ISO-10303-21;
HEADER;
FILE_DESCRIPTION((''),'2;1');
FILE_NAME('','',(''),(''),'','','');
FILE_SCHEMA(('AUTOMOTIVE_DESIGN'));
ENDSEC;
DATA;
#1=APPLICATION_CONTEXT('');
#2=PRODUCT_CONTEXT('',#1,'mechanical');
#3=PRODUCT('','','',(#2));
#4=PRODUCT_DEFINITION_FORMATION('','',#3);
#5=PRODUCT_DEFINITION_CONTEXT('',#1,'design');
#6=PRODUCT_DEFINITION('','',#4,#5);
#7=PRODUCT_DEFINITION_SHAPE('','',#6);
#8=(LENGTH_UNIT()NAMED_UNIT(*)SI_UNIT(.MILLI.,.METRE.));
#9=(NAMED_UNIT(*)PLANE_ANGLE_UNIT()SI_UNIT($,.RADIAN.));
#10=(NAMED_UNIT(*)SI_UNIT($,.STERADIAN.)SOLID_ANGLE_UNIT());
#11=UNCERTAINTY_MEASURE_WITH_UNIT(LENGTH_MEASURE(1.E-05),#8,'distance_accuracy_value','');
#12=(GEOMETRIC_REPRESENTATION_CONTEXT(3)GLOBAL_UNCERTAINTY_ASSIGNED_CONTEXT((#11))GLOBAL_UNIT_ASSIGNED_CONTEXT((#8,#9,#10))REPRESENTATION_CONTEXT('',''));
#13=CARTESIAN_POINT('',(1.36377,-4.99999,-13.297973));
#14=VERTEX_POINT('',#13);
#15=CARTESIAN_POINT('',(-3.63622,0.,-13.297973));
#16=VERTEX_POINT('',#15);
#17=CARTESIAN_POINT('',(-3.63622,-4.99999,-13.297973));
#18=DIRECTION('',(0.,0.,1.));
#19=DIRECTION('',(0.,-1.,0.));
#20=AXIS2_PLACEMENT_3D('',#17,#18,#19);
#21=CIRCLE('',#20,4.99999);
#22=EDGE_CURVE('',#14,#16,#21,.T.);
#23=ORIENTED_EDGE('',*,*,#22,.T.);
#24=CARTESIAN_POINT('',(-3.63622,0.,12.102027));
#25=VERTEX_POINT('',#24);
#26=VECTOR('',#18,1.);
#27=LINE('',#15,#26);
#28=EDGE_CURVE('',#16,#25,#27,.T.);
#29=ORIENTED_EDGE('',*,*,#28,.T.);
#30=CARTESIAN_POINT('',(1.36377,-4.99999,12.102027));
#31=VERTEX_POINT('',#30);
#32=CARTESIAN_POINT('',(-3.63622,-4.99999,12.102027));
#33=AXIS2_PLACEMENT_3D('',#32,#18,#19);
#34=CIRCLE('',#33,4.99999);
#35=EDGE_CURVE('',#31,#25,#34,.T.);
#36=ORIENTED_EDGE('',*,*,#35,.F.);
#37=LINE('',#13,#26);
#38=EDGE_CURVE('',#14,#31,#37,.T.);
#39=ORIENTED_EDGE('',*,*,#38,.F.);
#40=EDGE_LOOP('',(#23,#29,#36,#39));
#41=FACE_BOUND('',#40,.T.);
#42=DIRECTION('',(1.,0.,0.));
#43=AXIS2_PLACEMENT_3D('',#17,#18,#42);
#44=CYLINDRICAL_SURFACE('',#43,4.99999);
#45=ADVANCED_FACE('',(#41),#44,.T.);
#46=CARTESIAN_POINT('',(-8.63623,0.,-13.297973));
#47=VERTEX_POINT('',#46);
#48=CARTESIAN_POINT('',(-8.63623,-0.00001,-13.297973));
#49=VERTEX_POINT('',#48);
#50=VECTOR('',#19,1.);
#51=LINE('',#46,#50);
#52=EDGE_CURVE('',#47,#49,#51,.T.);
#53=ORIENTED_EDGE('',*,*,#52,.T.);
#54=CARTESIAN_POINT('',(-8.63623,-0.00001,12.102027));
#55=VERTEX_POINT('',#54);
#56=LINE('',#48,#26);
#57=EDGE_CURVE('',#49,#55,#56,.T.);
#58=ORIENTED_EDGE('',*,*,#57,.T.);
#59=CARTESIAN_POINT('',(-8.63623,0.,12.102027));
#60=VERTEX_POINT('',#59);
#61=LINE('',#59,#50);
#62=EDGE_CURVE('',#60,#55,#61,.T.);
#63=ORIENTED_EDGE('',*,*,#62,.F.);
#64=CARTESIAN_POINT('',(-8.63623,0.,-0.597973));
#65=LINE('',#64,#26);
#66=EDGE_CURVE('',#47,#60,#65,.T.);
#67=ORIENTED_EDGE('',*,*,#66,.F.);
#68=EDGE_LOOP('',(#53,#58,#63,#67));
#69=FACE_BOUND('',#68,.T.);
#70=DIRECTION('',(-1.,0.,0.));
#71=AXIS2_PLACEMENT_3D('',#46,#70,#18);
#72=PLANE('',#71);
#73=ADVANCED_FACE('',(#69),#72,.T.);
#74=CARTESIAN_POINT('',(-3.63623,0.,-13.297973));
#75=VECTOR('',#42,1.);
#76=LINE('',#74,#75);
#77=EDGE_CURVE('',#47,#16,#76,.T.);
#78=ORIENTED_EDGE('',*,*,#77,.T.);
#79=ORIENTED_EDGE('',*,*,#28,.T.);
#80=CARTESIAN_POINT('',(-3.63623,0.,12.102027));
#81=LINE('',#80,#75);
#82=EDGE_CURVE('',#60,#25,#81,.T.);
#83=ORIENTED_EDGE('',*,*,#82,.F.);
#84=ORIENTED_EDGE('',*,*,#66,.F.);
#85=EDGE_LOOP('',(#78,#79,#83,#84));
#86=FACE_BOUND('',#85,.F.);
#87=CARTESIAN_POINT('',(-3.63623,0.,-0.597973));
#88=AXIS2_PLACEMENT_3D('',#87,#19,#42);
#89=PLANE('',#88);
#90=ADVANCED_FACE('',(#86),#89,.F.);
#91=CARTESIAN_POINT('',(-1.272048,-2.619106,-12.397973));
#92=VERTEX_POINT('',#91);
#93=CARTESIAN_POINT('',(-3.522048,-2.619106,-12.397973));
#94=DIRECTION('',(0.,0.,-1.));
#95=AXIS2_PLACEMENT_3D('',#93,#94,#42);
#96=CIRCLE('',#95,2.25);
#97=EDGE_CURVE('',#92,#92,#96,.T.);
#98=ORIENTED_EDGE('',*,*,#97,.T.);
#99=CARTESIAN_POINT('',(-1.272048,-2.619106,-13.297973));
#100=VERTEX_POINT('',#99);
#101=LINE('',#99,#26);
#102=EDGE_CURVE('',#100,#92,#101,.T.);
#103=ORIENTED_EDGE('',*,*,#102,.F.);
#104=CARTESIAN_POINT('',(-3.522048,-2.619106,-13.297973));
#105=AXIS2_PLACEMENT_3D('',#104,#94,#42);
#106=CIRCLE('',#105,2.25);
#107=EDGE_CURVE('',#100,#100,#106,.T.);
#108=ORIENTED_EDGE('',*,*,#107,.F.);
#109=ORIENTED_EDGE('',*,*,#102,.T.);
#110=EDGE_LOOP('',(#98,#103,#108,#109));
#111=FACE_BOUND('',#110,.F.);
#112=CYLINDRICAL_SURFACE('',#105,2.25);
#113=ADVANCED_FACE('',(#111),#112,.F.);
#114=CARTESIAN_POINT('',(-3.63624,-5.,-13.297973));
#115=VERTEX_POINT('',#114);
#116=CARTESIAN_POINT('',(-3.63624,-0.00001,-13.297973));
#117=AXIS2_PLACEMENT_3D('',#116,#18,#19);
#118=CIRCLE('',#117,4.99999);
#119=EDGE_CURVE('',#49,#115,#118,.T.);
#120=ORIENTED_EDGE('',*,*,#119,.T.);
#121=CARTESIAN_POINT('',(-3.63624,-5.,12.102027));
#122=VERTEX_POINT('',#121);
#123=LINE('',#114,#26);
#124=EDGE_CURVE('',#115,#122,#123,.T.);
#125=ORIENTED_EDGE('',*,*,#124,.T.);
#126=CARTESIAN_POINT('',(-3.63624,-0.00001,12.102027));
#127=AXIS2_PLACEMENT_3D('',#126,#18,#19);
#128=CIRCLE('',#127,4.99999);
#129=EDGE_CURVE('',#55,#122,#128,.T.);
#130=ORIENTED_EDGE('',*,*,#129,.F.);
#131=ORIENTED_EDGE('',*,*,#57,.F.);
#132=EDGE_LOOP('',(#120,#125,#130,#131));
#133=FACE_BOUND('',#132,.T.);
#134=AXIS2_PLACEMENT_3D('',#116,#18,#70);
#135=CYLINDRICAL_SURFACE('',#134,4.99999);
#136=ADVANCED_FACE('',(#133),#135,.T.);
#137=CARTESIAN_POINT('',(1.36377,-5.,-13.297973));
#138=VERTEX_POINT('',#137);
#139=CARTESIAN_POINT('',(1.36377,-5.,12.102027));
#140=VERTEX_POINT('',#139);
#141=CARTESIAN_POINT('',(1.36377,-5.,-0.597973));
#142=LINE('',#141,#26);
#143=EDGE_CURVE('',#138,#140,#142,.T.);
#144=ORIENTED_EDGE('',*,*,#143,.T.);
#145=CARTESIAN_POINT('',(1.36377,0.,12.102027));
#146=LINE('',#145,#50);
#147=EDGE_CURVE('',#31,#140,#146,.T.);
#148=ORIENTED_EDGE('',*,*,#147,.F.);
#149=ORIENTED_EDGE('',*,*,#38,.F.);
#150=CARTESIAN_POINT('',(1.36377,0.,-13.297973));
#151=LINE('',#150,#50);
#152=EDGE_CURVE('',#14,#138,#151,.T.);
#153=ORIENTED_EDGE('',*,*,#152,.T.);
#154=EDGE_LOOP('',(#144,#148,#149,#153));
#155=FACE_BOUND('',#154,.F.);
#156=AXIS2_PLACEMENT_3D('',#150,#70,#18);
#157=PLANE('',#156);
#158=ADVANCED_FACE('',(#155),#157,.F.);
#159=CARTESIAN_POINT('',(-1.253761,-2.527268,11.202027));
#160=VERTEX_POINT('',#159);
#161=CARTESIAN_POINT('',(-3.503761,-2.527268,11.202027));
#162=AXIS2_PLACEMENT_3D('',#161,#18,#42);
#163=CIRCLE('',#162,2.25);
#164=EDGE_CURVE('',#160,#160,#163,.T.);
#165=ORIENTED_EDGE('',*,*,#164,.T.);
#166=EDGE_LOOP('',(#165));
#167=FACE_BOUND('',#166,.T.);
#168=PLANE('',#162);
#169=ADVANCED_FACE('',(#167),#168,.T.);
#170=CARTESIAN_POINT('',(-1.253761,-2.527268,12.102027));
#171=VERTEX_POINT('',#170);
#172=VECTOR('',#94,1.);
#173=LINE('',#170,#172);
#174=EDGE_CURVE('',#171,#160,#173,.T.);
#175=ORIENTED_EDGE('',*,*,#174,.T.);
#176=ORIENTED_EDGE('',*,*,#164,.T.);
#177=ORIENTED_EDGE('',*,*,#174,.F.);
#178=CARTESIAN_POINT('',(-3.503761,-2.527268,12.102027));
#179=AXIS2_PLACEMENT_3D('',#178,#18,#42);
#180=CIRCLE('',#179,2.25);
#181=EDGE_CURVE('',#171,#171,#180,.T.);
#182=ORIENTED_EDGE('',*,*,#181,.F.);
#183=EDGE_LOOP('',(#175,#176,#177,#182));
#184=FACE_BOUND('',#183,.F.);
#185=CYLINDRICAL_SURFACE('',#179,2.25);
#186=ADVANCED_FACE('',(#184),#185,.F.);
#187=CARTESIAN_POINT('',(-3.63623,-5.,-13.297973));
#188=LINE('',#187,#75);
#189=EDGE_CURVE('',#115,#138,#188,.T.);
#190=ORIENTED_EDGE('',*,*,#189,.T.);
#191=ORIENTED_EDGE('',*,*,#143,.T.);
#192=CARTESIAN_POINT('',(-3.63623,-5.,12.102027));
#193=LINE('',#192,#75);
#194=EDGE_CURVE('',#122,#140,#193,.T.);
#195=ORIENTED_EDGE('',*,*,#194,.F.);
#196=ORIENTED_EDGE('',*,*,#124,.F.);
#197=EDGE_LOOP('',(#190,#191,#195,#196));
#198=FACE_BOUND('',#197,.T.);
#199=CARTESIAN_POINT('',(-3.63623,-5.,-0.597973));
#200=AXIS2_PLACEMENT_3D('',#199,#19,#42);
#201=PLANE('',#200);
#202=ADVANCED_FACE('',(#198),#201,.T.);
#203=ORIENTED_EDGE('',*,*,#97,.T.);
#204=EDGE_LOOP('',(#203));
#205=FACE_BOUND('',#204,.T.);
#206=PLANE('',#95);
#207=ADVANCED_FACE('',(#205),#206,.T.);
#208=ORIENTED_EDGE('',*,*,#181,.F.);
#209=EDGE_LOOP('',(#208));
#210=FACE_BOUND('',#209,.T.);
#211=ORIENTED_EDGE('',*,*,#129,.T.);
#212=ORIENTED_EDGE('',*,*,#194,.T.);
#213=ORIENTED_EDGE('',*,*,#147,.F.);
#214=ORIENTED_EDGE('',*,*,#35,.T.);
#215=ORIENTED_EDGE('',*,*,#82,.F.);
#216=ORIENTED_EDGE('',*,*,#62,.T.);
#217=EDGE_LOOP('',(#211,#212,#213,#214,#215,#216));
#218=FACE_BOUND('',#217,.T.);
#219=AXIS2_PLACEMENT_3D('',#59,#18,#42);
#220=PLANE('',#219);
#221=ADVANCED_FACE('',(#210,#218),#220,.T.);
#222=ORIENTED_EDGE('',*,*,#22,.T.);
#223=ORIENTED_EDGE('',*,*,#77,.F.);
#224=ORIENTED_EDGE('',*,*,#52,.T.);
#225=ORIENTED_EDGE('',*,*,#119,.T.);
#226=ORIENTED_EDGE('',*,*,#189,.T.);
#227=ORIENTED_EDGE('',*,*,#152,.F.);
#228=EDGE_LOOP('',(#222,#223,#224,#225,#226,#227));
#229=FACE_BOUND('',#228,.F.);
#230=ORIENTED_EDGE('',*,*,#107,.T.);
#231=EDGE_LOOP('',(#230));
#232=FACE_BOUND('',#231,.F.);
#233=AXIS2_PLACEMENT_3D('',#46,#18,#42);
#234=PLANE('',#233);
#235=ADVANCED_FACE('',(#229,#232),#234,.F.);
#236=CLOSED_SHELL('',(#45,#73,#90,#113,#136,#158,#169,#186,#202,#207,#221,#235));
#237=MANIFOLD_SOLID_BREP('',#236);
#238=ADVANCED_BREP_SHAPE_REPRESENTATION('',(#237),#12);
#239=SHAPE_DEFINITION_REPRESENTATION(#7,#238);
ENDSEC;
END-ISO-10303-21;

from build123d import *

# Parameters (mm, degrees)
F0_W     = 10
F0_H     = 25.4
F1_DEPTH = 5
F2_R     = 4.99999
F3_R     = 2.25
F4_DEPTH = 0.9
F5_R     = 2.25
F6_DEPTH = 0.9


# Not quite as in the source:
# - a fillet or chamfer is up to 0.001 mm smaller than in the source, because OpenCascade refuses the exact size


with BuildPart() as f1:
    # F0 (on Front) → F1 (new body)
    with BuildSketch(Plane.XZ):
        with Locations((-3.6362301892, -0.5979733542)):
            Rectangle(F0_W, F0_H)
    extrude(amount=F1_DEPTH)

    # F2 (radius 5 in the source; OpenCascade refuses exactly that, so slightly less here)
    f2_edges = [f1.edges().sort_by_distance(p)[0] for p in [
        (1.36377, 0, -0.597973),
        (-8.63623, -5, -0.597973),
    ]]
    fillet(f2_edges, radius=F2_R)

    # F3 (on face) → F4 (cut)
    with BuildSketch(Plane.XY.offset(12.1020266458)):
        with Locations((-3.5037611703, -2.5272680031)):
            Circle(F3_R)
    extrude(amount=-F4_DEPTH, mode=Mode.SUBTRACT)

    # F5 (on face) → F6 (cut)
    with BuildSketch(Plane(origin=(0, 0, -13.2979733542), x_dir=(1, 0, 0), z_dir=(0, 0, -1))):
        with Locations((-3.5220479187, 2.6191056776)):
            Circle(F5_R)
    extrude(amount=-F6_DEPTH, mode=Mode.SUBTRACT)


solid = f1.part
